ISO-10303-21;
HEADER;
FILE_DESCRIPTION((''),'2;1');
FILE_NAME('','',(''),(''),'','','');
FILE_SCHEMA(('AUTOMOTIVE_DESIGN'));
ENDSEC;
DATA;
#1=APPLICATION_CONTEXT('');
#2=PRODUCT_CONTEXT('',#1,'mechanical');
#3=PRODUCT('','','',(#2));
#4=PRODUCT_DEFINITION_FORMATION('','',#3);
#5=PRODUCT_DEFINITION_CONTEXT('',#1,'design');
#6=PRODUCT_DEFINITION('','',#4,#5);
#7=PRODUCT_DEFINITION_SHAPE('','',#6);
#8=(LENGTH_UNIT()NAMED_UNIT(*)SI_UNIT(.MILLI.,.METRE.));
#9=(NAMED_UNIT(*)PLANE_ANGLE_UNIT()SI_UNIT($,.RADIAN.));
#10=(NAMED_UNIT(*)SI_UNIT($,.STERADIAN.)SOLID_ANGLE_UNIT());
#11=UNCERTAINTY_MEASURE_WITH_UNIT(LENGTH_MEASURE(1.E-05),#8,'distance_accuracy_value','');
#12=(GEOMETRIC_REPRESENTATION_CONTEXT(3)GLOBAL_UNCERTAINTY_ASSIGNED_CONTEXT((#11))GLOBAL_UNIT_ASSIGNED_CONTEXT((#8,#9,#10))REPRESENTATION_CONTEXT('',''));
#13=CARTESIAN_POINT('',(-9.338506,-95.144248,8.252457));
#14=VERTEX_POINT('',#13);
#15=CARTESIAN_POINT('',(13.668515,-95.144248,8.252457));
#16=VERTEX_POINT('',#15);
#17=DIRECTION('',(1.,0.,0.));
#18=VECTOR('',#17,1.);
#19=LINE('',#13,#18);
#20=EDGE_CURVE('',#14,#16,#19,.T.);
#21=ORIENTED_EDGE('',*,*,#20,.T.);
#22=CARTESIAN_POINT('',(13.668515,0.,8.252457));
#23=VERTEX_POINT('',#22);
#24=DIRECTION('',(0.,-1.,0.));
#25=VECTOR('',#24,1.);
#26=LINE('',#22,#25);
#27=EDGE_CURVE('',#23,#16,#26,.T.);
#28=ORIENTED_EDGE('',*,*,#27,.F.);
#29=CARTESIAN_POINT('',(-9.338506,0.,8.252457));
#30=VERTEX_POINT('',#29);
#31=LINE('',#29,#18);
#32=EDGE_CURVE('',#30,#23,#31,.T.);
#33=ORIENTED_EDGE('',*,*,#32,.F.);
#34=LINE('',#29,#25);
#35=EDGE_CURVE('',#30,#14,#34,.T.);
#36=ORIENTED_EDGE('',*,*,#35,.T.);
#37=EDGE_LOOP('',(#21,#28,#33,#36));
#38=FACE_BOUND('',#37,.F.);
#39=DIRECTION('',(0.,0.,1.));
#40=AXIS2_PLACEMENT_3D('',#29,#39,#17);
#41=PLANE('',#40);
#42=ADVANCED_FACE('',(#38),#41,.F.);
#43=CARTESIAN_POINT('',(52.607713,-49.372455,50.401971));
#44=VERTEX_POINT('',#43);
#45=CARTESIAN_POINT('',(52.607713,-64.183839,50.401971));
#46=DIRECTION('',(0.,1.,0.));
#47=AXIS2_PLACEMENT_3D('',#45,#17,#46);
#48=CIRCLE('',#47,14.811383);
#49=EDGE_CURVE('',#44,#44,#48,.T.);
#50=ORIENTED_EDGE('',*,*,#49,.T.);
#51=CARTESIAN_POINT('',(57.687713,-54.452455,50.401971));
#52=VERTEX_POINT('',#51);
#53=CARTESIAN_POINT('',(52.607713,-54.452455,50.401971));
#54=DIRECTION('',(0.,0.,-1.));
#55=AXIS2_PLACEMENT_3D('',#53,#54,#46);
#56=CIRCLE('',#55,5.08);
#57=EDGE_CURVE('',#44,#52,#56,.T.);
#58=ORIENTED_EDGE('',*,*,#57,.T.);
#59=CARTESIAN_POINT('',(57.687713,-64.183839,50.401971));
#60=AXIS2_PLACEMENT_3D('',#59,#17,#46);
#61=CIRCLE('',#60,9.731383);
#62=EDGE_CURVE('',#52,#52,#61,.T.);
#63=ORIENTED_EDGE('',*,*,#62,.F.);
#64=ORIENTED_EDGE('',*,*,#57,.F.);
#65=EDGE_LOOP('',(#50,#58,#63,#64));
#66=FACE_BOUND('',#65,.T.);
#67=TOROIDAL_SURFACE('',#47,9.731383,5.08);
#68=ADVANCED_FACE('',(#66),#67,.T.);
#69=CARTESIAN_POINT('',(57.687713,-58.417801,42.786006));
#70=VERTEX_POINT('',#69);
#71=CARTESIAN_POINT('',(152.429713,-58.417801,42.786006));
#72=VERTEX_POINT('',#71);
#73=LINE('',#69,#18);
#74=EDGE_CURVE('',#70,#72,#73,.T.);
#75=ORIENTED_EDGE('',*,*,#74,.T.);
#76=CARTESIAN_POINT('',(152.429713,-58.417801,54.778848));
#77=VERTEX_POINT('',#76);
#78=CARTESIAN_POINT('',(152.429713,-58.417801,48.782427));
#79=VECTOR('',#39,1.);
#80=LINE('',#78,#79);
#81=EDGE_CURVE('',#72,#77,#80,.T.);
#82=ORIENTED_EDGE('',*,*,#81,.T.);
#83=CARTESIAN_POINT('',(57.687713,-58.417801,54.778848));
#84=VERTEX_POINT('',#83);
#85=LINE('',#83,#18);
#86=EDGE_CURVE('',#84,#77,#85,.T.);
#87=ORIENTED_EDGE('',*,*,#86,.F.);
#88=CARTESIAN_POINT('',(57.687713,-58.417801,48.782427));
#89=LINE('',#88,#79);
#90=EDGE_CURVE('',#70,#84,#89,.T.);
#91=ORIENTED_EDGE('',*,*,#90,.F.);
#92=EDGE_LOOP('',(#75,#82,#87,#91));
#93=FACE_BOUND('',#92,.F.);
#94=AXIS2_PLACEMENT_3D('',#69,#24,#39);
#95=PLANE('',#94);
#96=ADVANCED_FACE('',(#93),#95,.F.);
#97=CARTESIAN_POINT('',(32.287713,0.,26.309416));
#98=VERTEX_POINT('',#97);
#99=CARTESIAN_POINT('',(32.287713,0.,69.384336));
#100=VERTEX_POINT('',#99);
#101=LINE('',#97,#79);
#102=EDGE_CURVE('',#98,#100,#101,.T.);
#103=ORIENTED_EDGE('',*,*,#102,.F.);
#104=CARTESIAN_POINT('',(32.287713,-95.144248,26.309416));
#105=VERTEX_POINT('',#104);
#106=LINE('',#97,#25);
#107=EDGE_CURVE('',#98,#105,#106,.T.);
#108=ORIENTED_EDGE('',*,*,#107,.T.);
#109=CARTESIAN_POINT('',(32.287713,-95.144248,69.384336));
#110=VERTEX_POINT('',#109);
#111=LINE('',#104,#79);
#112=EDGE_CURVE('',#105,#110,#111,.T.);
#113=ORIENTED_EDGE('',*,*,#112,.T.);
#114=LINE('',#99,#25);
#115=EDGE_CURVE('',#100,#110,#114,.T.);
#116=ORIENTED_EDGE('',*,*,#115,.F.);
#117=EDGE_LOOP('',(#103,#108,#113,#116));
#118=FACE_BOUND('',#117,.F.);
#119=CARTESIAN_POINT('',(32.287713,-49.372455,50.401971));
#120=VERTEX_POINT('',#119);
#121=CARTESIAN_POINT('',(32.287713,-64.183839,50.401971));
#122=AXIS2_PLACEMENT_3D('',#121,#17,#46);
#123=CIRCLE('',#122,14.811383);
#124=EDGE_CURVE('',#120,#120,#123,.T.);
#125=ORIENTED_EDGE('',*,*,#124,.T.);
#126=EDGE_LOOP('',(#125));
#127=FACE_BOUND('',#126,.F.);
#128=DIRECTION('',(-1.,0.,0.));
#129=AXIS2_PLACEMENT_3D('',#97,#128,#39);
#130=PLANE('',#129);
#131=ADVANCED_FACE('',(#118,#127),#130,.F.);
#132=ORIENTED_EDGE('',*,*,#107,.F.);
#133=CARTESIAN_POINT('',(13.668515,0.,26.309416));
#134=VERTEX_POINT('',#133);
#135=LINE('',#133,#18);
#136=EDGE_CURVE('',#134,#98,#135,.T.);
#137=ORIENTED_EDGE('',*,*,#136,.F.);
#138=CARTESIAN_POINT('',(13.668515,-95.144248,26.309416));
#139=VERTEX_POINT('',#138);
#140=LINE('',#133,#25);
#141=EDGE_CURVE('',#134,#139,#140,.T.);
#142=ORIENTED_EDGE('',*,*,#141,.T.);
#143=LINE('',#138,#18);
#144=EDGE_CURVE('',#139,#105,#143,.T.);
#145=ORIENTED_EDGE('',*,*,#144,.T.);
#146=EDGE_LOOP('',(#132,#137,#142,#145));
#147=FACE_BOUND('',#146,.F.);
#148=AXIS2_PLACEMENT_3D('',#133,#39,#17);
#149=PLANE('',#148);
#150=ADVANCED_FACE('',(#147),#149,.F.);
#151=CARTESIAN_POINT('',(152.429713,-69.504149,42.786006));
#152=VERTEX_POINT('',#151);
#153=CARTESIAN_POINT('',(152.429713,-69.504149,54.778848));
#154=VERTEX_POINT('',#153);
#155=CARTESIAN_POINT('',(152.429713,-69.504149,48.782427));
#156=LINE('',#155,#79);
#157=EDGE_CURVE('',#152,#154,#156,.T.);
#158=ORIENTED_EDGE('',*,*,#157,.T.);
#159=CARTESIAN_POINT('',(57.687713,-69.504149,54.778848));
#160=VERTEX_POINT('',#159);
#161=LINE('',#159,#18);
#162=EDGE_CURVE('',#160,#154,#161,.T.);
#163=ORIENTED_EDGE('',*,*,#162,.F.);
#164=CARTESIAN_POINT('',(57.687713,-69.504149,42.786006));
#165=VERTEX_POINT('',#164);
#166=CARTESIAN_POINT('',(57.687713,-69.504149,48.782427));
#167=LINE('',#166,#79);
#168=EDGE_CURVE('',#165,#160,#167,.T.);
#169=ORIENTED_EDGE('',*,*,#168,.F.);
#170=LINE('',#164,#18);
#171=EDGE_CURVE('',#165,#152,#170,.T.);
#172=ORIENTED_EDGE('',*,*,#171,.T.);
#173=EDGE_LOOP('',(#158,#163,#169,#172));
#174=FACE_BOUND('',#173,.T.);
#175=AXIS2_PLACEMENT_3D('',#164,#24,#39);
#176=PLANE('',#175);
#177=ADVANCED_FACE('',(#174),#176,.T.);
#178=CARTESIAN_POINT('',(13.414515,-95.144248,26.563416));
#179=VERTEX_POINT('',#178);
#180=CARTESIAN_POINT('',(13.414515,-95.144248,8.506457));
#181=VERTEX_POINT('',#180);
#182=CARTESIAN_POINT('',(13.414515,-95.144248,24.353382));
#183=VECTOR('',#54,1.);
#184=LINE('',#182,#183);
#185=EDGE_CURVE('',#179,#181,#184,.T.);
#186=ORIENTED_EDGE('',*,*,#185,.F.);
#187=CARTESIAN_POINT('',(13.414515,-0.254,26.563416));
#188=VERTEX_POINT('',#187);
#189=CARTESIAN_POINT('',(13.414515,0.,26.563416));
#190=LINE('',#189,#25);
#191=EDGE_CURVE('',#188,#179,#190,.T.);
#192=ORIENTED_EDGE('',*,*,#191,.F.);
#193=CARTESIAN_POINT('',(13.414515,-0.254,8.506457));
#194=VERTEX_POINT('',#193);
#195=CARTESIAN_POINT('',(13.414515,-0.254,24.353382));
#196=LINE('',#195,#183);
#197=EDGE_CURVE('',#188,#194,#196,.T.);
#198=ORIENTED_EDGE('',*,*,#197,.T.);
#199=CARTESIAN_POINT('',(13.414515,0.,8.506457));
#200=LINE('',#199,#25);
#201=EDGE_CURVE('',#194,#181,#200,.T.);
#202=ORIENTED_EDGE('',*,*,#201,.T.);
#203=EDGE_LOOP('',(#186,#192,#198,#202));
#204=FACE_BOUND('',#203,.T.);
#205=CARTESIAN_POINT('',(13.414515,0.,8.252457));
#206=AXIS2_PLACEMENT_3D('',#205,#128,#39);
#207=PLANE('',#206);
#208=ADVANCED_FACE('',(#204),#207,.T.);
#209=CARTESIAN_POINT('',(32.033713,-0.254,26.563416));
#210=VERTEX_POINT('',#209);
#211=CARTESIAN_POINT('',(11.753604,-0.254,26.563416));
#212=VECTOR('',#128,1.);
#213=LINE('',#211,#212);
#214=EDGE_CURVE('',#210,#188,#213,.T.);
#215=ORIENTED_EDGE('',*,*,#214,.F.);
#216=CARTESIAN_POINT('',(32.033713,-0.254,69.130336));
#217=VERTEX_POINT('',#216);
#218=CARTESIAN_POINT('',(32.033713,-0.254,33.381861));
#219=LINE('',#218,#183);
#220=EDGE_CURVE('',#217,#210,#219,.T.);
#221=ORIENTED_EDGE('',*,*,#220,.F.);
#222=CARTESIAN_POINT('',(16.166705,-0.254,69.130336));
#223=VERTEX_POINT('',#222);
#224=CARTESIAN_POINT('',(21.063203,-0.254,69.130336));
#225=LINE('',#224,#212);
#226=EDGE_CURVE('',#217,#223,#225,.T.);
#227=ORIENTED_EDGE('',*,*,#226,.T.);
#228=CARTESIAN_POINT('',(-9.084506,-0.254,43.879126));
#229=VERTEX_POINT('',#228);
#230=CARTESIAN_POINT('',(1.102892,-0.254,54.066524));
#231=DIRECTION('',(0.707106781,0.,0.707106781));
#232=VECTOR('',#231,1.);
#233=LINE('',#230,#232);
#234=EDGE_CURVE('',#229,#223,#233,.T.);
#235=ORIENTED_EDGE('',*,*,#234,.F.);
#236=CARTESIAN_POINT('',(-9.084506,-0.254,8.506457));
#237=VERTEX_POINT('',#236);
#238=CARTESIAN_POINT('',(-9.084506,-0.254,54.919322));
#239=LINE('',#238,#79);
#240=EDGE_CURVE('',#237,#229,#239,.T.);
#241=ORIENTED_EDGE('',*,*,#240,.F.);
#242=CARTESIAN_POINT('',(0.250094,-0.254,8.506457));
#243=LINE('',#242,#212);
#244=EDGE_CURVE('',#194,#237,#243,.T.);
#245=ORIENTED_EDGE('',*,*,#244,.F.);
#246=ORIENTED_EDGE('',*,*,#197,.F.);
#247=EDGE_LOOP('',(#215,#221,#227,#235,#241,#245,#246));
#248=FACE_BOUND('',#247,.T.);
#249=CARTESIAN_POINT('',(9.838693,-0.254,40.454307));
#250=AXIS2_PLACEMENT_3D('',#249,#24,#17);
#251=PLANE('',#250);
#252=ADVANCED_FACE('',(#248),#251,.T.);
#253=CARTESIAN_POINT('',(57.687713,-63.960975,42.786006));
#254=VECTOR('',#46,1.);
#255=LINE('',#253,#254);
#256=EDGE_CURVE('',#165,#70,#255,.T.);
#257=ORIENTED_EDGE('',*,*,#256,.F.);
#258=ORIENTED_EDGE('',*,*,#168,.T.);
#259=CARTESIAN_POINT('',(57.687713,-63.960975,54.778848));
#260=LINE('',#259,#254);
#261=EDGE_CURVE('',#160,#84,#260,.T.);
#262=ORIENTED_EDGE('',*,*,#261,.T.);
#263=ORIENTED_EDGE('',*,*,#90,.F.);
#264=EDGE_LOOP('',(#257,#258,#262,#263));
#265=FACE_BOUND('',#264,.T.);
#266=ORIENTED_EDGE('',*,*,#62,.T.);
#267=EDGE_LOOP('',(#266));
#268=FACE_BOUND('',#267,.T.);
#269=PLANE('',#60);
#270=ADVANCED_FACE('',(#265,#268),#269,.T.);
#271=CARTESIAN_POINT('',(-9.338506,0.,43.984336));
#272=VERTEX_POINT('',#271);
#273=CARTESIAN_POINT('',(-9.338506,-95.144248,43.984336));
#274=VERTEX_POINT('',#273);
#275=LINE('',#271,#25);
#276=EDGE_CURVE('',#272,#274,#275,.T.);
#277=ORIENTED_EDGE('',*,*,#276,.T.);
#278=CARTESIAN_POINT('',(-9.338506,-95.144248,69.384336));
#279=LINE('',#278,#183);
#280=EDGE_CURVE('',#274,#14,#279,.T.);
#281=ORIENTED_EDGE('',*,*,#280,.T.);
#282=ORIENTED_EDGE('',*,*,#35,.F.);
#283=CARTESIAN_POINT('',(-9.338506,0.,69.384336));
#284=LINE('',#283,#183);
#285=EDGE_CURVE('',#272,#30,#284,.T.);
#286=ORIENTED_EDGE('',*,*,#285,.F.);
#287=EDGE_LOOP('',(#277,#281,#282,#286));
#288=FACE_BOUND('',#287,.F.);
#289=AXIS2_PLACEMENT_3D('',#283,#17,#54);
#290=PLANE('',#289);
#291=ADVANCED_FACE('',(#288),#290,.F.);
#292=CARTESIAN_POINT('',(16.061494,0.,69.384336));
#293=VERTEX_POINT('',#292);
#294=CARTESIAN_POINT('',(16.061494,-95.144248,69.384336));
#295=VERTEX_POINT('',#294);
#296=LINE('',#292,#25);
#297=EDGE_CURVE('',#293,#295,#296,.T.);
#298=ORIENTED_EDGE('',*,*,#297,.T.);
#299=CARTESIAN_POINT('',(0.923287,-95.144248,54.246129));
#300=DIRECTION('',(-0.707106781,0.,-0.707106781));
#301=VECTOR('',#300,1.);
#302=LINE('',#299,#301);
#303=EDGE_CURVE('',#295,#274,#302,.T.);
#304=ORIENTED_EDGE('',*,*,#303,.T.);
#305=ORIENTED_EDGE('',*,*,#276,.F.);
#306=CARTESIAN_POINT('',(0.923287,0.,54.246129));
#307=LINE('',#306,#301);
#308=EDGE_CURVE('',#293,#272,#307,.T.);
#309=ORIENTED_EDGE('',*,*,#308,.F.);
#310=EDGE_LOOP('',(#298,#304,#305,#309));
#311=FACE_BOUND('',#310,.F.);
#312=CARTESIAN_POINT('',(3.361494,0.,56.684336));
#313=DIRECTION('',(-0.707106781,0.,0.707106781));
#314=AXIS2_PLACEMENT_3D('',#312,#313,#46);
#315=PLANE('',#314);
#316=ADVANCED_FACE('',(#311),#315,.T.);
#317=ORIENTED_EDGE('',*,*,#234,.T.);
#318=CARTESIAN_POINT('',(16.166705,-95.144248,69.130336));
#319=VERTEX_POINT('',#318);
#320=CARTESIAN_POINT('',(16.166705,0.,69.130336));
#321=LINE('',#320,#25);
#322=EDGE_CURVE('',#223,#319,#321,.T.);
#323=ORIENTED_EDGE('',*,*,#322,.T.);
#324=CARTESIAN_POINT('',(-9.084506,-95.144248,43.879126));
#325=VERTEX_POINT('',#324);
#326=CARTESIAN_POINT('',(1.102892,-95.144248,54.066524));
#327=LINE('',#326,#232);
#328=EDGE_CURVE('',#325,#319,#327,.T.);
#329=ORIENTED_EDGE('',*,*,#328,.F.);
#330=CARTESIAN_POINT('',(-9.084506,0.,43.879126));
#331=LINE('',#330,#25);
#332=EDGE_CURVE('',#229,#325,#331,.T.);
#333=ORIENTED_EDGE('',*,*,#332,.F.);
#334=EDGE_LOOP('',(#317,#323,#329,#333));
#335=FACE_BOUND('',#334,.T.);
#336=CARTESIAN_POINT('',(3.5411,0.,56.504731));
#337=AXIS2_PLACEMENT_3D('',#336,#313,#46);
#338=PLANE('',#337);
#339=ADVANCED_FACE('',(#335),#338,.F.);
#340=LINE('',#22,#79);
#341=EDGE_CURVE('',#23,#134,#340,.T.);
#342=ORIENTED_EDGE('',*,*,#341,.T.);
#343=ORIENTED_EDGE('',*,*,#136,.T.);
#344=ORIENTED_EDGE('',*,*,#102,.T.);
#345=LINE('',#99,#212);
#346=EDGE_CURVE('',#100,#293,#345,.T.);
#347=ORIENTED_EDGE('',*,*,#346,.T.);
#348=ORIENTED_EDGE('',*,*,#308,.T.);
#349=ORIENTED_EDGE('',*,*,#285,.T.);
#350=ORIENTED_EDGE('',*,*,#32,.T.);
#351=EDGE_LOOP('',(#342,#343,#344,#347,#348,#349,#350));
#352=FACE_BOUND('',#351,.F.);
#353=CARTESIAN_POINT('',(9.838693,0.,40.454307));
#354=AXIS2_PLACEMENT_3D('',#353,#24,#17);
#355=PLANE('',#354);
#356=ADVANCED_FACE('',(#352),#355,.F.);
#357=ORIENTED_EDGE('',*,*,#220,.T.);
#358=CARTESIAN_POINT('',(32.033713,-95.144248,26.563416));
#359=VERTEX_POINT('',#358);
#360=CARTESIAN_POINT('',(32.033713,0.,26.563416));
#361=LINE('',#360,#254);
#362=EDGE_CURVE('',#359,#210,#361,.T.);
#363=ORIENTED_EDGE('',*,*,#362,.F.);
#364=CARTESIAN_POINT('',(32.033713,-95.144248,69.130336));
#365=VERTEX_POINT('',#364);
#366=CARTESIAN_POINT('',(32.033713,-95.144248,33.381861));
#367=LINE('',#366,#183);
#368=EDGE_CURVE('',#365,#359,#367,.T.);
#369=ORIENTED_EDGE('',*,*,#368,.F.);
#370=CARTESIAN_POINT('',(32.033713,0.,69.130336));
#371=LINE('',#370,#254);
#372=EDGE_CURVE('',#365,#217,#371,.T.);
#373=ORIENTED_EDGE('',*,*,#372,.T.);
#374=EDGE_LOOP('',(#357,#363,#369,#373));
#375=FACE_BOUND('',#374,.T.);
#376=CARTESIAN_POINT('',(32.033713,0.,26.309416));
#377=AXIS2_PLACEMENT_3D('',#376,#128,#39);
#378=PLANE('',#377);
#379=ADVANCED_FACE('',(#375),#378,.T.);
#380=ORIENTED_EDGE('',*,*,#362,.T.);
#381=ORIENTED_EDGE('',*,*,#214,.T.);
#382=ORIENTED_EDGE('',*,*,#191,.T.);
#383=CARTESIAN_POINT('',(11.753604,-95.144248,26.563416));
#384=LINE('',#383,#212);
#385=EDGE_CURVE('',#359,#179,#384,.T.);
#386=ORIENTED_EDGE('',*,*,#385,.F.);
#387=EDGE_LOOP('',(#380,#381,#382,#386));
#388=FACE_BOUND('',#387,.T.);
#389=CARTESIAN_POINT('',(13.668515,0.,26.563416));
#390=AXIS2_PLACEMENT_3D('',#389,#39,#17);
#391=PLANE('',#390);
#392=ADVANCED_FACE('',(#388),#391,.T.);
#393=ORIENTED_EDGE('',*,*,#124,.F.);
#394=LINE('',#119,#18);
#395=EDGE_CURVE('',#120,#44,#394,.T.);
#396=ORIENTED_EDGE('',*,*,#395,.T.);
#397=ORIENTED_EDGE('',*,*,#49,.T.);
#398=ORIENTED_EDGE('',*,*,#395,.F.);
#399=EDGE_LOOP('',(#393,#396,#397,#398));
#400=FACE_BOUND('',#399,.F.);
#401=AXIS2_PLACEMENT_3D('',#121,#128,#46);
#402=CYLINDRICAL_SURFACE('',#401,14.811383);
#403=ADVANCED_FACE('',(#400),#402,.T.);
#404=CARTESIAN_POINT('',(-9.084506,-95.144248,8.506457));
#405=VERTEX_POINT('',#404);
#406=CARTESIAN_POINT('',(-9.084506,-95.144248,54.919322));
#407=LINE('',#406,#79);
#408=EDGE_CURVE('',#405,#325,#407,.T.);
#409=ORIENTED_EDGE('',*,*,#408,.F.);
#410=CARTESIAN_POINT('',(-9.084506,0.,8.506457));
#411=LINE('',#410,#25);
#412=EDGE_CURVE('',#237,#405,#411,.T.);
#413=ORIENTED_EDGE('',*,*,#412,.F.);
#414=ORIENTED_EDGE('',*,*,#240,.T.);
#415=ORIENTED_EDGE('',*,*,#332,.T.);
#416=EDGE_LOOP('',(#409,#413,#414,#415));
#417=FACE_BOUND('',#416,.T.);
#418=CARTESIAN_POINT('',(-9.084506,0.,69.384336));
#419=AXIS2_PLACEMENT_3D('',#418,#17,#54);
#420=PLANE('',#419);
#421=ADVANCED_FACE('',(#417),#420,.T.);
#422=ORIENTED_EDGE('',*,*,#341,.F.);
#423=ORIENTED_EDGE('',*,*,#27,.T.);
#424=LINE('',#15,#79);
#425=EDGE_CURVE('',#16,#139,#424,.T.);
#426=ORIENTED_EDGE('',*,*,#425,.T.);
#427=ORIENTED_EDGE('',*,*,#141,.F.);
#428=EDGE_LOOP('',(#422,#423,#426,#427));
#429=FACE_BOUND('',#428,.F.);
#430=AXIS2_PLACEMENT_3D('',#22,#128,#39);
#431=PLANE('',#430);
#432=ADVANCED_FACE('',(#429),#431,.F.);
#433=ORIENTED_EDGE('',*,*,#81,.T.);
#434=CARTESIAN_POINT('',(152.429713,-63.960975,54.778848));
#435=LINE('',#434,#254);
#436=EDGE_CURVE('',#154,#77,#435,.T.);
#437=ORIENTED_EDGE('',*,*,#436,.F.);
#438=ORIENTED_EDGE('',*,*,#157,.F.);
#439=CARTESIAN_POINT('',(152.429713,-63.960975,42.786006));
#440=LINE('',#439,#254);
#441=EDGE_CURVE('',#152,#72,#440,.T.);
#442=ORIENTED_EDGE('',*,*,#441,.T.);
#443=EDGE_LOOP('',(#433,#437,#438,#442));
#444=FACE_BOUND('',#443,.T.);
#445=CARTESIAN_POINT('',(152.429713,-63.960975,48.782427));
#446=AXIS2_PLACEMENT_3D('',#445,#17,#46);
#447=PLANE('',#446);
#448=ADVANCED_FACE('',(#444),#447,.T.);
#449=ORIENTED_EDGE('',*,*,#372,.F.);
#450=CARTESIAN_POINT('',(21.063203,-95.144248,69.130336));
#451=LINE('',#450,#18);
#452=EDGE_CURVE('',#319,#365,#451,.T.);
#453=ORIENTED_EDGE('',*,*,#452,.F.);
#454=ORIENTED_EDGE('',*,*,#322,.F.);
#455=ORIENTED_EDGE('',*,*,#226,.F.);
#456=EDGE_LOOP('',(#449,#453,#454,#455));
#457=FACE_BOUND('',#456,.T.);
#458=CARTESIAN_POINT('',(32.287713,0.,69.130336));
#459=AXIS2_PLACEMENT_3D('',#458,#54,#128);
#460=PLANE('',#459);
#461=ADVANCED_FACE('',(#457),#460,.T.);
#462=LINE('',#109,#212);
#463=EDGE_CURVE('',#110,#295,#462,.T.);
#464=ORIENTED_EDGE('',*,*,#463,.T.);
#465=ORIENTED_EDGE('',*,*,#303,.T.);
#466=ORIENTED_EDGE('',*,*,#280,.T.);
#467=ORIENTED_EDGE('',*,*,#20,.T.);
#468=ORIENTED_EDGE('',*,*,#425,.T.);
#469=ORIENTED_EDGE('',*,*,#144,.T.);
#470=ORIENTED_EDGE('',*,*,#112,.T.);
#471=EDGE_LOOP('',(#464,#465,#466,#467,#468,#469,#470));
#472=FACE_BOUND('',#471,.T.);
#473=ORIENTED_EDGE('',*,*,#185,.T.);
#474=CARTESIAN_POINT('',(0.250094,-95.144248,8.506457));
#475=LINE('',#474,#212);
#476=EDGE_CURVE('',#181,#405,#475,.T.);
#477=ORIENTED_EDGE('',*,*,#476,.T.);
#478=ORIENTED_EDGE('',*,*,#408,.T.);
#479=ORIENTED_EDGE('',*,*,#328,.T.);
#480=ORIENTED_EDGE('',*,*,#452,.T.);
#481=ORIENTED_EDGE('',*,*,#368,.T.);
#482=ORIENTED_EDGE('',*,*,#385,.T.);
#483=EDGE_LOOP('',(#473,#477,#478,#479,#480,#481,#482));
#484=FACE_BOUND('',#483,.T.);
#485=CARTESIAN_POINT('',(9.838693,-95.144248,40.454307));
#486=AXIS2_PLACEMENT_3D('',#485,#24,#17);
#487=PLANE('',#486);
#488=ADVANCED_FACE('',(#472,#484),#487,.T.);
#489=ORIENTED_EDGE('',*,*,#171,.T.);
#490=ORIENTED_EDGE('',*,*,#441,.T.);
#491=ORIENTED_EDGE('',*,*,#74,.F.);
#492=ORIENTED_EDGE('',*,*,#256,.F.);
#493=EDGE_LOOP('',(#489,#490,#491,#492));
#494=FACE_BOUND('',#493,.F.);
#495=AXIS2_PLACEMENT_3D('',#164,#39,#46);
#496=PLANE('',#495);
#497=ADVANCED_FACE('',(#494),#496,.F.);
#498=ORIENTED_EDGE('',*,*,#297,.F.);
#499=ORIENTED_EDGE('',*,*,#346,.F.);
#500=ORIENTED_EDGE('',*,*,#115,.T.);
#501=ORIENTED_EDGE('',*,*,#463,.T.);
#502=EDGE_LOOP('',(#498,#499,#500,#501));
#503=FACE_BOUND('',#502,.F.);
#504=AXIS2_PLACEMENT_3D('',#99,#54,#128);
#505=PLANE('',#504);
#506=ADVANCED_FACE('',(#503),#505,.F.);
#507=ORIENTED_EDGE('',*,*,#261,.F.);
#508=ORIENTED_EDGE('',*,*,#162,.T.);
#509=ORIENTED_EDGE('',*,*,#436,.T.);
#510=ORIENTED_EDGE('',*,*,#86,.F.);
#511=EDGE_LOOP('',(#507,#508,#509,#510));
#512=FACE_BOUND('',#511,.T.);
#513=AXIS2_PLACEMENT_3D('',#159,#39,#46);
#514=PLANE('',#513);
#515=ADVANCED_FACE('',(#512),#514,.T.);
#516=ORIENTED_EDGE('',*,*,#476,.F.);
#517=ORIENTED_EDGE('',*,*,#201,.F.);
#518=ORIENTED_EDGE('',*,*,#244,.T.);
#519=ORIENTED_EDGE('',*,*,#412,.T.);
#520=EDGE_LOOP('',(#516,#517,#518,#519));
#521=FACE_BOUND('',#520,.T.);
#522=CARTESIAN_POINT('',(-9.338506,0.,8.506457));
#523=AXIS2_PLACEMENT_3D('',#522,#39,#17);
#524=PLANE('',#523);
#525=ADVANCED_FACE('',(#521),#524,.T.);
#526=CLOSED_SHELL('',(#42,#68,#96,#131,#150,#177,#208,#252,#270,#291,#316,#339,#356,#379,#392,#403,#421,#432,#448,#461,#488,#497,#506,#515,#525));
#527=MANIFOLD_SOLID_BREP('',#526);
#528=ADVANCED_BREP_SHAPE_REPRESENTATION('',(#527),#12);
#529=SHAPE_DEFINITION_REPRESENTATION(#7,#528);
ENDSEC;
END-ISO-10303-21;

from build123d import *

# Parameters (mm, degrees)
F1_DEPTH  = 95.1442476362
F4_SIZE   = 25.4
F5_T      = -0.254
F7_R      = 14.8113832011
F8_DEPTH  = 25.4
F9_W      = 11.0863484442
F9_H      = 11.992841959
F10_DEPTH = 94.742
F11_R     = 5.08


# Not quite as in the source:
# - the program builds the solid bodies; features that only make, move or delete a surface that nothing else refers to are left out


with BuildPart() as f1:
    # F0 (on Front) → F1 (new body)
    with BuildSketch(Plane.XZ):
        Polygon((-9.3385055661, 8.2524567842), (13.6685147882, 8.2524567842), (13.6685147882, 26.3094156981), (32.2877131402, 26.3094156981), (32.2877131402, 69.3843364716), (-9.3385055661, 69.3843364716), align=None)
    extrude(amount=F1_DEPTH)

    # F4
    f4_edges = [f1.edges().sort_by_distance(p)[0] for p in [
        (-9.338506, -47.572124, 69.384336),
    ]]
    chamfer(f4_edges, length=F4_SIZE)

    # F5
    f5_openings = [f1.faces().sort_by_distance(p)[0] for p in [
        (11.53567, -95.144248, 38.877913),
    ]]
    offset(amount=F5_T, openings=f5_openings, kind=Kind.INTERSECTION)

    # F7 (on face) → F8 (join)
    with BuildSketch(Plane.YZ.offset(32.2877131402)):
        with Locations((-64.1838386655, 50.4019707441)):
            Circle(F7_R)
    extrude(amount=F8_DEPTH)

    # F9 (on face) → F10 (join)
    with BuildSketch(Plane.YZ.offset(57.6877131402)):
        with Locations((-63.960975036, 48.7824268639)):
            Rectangle(F9_W, F9_H)
    extrude(amount=F10_DEPTH)

    # F11
    f11_edges = [f1.edges().sort_by_distance(p)[0] for p in [
        (57.687713, -78.995222, 50.401971),
    ]]
    fillet(f11_edges, radius=F11_R)


solid = f1.part
